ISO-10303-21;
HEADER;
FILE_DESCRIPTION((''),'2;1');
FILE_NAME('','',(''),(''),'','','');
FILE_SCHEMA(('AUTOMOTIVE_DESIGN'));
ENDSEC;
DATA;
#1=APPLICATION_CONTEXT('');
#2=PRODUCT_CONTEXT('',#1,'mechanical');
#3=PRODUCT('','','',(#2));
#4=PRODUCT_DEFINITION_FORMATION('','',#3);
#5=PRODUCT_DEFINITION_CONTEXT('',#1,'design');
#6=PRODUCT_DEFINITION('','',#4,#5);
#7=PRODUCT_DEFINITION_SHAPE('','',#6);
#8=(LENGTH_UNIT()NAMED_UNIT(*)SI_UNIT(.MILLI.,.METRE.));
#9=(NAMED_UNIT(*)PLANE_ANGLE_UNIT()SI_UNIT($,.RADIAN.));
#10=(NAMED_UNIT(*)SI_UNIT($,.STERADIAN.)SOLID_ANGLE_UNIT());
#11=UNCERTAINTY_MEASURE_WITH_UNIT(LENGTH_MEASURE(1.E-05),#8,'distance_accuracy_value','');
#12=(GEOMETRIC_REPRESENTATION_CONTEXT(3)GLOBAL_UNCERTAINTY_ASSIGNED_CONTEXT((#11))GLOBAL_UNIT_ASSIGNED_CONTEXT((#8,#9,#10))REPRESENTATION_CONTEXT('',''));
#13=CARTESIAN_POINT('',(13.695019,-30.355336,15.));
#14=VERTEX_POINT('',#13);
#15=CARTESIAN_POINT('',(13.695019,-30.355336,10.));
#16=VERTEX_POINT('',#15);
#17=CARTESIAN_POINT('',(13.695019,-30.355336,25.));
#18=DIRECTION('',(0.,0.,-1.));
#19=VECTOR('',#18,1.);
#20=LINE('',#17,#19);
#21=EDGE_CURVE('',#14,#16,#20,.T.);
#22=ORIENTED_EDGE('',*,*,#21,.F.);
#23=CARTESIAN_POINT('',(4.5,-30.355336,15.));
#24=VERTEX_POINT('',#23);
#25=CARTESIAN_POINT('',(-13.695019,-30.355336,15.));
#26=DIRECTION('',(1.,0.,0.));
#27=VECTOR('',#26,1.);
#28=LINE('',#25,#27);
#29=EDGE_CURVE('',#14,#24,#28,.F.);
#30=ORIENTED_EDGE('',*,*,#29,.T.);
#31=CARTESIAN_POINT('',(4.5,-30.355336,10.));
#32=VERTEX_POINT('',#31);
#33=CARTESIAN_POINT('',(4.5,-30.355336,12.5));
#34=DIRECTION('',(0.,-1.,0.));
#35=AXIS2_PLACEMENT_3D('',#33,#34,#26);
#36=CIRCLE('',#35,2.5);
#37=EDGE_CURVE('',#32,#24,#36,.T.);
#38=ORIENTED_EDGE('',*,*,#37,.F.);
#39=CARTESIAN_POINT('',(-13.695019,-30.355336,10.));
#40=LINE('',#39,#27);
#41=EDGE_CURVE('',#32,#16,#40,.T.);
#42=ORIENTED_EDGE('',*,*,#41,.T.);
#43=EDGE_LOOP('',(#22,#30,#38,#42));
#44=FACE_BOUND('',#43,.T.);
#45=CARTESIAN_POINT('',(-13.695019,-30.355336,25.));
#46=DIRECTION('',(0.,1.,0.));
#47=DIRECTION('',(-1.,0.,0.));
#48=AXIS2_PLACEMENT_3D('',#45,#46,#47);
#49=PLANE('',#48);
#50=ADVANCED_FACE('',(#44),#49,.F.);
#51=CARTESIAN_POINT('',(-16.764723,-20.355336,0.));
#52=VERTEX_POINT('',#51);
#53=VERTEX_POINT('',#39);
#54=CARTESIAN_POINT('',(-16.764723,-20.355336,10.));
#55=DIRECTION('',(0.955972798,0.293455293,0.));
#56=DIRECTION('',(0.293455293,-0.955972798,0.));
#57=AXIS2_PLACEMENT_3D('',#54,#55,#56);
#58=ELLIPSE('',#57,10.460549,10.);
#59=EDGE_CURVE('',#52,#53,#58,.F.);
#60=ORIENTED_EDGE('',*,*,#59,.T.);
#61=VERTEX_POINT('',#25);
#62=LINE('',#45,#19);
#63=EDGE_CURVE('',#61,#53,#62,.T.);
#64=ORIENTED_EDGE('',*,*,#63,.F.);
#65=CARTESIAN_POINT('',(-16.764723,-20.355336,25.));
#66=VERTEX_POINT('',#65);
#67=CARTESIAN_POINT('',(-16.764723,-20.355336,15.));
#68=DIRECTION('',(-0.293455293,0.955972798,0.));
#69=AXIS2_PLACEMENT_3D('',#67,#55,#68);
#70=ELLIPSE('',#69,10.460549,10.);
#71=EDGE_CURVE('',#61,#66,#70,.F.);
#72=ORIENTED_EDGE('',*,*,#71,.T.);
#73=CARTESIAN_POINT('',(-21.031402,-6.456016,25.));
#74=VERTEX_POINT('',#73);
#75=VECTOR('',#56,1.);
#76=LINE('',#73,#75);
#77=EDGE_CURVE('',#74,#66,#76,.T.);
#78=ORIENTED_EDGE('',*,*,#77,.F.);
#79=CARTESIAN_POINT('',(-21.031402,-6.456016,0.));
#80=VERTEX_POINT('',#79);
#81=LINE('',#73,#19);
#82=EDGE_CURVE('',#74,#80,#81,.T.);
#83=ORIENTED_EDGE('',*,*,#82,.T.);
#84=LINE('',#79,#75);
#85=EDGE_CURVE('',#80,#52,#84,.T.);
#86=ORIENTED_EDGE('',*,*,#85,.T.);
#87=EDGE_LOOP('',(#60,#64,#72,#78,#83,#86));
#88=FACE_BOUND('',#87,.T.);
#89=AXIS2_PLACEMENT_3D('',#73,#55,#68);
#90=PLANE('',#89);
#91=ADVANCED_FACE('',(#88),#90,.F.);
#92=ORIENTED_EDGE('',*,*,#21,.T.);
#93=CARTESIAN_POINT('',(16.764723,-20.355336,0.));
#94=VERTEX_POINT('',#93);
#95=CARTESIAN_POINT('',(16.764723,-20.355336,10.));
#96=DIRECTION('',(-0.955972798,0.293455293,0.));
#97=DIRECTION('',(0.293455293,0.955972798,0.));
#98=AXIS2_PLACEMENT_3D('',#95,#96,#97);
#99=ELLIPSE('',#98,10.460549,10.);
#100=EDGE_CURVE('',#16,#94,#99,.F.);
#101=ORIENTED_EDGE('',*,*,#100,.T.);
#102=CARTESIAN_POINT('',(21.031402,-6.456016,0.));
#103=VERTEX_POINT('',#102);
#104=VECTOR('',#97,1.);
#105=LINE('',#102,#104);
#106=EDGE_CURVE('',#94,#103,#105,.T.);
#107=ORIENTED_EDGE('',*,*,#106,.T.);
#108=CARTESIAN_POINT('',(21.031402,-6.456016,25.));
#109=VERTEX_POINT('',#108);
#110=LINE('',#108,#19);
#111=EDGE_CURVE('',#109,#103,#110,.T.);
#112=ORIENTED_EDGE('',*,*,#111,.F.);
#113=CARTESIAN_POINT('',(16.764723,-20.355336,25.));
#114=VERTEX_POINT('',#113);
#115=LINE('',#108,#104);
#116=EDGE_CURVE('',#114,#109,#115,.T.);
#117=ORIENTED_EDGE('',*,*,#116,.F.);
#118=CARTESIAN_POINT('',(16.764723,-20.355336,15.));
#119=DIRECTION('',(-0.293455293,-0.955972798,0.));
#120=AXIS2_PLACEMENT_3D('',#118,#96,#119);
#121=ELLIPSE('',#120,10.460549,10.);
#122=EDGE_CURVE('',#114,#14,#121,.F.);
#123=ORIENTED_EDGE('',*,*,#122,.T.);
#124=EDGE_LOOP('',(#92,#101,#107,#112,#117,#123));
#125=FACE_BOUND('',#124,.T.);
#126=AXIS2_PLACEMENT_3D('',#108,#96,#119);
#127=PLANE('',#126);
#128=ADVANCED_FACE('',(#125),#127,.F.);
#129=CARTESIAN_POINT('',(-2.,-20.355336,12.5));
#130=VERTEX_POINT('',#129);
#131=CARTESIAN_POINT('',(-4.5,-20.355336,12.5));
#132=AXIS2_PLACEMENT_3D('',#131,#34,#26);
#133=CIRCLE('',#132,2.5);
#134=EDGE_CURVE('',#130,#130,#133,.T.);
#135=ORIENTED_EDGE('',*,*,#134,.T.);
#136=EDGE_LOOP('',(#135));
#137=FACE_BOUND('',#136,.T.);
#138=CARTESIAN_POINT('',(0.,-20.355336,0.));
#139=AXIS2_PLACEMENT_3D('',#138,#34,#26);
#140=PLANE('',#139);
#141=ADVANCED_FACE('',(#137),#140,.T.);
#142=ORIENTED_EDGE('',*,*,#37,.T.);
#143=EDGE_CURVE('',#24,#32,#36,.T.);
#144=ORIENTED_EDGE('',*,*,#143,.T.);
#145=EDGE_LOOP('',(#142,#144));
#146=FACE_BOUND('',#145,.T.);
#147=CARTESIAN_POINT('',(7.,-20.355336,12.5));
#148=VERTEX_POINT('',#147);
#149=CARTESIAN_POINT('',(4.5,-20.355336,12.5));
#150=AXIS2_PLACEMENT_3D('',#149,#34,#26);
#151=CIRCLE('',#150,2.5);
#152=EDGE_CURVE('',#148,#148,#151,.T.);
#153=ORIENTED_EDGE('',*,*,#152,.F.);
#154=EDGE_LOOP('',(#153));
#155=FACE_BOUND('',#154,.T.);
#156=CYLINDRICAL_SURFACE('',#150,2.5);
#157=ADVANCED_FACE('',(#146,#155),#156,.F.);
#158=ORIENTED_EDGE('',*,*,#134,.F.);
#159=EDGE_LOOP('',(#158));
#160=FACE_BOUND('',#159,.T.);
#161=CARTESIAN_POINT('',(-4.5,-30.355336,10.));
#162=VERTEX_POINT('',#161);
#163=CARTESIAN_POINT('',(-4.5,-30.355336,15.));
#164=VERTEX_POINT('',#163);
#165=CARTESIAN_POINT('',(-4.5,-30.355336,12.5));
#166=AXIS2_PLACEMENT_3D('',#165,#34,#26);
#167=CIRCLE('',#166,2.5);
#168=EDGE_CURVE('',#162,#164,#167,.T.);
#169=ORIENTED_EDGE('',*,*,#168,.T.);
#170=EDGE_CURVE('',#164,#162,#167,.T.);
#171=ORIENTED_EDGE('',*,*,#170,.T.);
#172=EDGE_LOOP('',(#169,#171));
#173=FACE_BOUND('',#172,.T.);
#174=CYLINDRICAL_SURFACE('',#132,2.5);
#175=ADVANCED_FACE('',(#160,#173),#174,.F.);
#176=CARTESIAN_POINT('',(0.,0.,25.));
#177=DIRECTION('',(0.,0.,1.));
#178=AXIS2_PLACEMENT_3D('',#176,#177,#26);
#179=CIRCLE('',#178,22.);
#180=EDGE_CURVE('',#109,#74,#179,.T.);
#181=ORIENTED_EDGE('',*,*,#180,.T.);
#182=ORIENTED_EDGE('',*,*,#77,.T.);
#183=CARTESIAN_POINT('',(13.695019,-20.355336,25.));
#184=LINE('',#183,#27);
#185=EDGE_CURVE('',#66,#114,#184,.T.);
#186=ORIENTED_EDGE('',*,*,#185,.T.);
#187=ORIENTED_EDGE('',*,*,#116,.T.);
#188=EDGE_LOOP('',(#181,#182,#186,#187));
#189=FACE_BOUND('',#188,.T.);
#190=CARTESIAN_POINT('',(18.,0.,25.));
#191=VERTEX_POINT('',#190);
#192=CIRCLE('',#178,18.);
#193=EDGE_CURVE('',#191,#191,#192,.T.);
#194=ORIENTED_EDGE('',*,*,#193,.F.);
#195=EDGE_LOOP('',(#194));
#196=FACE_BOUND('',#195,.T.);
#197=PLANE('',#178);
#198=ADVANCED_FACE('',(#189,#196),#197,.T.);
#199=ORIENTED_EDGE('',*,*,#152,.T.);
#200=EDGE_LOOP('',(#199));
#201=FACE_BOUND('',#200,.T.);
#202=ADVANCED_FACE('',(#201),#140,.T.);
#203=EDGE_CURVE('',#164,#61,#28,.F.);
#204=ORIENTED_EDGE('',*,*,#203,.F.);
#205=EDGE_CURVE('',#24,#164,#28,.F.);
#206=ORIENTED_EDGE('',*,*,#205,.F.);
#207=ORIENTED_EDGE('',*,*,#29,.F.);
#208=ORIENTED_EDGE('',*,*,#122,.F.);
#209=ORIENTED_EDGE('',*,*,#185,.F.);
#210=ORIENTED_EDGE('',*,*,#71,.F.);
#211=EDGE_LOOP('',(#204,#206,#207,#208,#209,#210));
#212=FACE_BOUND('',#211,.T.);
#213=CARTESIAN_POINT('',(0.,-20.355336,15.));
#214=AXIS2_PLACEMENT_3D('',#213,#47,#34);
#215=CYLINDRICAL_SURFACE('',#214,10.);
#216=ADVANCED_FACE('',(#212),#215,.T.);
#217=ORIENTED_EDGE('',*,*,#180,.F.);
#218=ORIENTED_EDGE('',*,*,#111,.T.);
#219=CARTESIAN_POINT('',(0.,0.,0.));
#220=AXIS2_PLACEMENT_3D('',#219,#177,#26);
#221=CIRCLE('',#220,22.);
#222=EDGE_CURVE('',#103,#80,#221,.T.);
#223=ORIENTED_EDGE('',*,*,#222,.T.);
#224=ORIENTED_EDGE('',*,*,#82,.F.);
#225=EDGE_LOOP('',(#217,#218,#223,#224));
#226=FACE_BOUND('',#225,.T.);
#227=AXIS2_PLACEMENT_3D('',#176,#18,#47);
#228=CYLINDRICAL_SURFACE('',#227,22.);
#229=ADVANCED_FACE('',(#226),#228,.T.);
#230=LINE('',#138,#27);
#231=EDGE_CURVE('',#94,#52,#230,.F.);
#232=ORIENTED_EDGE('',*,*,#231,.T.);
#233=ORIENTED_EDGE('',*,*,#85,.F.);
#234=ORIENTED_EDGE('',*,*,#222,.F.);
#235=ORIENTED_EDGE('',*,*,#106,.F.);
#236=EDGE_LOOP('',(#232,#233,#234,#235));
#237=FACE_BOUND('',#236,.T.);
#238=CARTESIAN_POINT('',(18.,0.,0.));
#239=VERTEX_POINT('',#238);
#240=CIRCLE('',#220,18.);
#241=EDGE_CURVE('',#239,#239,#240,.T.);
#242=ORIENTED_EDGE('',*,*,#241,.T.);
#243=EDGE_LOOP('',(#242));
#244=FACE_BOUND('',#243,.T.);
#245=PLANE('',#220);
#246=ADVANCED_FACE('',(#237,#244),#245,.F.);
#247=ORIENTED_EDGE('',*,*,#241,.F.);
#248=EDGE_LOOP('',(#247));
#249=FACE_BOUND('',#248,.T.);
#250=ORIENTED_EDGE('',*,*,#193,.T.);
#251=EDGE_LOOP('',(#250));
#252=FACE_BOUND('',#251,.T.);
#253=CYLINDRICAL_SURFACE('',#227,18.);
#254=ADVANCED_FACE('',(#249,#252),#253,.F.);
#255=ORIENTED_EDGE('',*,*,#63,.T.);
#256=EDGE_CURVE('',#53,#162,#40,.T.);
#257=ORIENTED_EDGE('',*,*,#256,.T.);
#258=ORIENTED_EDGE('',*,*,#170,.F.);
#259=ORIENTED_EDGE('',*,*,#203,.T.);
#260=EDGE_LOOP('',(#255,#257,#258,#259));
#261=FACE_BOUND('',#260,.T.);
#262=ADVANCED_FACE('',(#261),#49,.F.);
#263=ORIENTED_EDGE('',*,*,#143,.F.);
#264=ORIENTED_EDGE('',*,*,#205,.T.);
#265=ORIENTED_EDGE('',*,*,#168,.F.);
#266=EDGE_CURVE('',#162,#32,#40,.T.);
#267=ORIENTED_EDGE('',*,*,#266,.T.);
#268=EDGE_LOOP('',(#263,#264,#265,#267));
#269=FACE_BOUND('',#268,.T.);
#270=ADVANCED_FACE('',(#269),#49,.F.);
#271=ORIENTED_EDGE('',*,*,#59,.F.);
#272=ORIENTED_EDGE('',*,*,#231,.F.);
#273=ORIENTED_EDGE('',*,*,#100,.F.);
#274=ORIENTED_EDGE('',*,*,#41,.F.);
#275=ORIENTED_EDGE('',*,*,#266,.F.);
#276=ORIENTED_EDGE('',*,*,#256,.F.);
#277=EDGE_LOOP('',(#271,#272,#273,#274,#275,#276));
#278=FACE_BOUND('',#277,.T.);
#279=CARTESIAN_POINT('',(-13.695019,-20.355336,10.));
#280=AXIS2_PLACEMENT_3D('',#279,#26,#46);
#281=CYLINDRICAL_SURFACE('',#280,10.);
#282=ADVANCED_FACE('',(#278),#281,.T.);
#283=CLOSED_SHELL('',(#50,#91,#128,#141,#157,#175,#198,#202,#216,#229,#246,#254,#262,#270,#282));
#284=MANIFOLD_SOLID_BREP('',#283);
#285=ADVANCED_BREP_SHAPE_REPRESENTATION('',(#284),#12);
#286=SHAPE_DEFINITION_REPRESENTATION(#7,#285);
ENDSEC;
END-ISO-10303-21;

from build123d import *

# Parameters (mm, degrees)
SKETCH1_R           = 18
BOSS_EXTRUDE1_DEPTH = 25
CUT_EXTRUDE1_DEPTH  = 10
FILLET1_R           = 10


with BuildPart() as part:
    # Sketch1 → Boss-Extrude1 (new body)
    with BuildSketch(Plane.XY):
        with BuildLine():
            Line((-21.031401564, -6.456016438), (-13.695019248, -30.355336397))
            Line((-13.695019248, -30.355336397), (13.695019248, -30.355336397))
            Line((13.695019248, -30.355336397), (21.031401564, -6.456016438))
            ThreePointArc((21.031401564, -6.456016438), (0, 22), (-21.031401564, -6.456016438))
        make_face()
        Circle(SKETCH1_R, mode=Mode.SUBTRACT)
    extrude(amount=BOSS_EXTRUDE1_DEPTH)

    # Sketch2 → Cut-Extrude1 (cut)
    with BuildSketch(Plane.XZ.offset(30.355336397)):
        with BuildLine():
            Line((-7, 12.5), (-4.5, 12.5))
            Line((-4.5, 12.5), (-2, 12.5))
            ThreePointArc((-2, 12.5), (-4.5, 15), (-7, 12.5))
        make_face()
        with BuildLine():
            Line((-2, 12.5), (-4.5, 12.5))
            Line((-4.5, 12.5), (-7, 12.5))
            ThreePointArc((-7, 12.5), (-4.5, 10), (-2, 12.5))
        make_face()
        with BuildLine():
            ThreePointArc((7, 12.5), (4.5, 15), (2, 12.5))
            Line((2, 12.5), (4.5, 12.5))
            Line((4.5, 12.5), (7, 12.5))
        make_face()
        with BuildLine():
            Line((4.5, 12.5), (2, 12.5))
            ThreePointArc((2, 12.5), (4.5, 10), (7, 12.5))
            Line((7, 12.5), (4.5, 12.5))
        make_face()
    extrude(amount=-CUT_EXTRUDE1_DEPTH, mode=Mode.SUBTRACT)

    # Fillet1
    fillet1_edges = [part.edges().sort_by_distance(p)[0] for p in [
        (0, -30.355336397, 25),
        (0, -30.355336397, 0),
    ]]
    fillet(fillet1_edges, radius=FILLET1_R - 0.0001)  # a hair under: the kernel refuses the full size


solid = part.part
